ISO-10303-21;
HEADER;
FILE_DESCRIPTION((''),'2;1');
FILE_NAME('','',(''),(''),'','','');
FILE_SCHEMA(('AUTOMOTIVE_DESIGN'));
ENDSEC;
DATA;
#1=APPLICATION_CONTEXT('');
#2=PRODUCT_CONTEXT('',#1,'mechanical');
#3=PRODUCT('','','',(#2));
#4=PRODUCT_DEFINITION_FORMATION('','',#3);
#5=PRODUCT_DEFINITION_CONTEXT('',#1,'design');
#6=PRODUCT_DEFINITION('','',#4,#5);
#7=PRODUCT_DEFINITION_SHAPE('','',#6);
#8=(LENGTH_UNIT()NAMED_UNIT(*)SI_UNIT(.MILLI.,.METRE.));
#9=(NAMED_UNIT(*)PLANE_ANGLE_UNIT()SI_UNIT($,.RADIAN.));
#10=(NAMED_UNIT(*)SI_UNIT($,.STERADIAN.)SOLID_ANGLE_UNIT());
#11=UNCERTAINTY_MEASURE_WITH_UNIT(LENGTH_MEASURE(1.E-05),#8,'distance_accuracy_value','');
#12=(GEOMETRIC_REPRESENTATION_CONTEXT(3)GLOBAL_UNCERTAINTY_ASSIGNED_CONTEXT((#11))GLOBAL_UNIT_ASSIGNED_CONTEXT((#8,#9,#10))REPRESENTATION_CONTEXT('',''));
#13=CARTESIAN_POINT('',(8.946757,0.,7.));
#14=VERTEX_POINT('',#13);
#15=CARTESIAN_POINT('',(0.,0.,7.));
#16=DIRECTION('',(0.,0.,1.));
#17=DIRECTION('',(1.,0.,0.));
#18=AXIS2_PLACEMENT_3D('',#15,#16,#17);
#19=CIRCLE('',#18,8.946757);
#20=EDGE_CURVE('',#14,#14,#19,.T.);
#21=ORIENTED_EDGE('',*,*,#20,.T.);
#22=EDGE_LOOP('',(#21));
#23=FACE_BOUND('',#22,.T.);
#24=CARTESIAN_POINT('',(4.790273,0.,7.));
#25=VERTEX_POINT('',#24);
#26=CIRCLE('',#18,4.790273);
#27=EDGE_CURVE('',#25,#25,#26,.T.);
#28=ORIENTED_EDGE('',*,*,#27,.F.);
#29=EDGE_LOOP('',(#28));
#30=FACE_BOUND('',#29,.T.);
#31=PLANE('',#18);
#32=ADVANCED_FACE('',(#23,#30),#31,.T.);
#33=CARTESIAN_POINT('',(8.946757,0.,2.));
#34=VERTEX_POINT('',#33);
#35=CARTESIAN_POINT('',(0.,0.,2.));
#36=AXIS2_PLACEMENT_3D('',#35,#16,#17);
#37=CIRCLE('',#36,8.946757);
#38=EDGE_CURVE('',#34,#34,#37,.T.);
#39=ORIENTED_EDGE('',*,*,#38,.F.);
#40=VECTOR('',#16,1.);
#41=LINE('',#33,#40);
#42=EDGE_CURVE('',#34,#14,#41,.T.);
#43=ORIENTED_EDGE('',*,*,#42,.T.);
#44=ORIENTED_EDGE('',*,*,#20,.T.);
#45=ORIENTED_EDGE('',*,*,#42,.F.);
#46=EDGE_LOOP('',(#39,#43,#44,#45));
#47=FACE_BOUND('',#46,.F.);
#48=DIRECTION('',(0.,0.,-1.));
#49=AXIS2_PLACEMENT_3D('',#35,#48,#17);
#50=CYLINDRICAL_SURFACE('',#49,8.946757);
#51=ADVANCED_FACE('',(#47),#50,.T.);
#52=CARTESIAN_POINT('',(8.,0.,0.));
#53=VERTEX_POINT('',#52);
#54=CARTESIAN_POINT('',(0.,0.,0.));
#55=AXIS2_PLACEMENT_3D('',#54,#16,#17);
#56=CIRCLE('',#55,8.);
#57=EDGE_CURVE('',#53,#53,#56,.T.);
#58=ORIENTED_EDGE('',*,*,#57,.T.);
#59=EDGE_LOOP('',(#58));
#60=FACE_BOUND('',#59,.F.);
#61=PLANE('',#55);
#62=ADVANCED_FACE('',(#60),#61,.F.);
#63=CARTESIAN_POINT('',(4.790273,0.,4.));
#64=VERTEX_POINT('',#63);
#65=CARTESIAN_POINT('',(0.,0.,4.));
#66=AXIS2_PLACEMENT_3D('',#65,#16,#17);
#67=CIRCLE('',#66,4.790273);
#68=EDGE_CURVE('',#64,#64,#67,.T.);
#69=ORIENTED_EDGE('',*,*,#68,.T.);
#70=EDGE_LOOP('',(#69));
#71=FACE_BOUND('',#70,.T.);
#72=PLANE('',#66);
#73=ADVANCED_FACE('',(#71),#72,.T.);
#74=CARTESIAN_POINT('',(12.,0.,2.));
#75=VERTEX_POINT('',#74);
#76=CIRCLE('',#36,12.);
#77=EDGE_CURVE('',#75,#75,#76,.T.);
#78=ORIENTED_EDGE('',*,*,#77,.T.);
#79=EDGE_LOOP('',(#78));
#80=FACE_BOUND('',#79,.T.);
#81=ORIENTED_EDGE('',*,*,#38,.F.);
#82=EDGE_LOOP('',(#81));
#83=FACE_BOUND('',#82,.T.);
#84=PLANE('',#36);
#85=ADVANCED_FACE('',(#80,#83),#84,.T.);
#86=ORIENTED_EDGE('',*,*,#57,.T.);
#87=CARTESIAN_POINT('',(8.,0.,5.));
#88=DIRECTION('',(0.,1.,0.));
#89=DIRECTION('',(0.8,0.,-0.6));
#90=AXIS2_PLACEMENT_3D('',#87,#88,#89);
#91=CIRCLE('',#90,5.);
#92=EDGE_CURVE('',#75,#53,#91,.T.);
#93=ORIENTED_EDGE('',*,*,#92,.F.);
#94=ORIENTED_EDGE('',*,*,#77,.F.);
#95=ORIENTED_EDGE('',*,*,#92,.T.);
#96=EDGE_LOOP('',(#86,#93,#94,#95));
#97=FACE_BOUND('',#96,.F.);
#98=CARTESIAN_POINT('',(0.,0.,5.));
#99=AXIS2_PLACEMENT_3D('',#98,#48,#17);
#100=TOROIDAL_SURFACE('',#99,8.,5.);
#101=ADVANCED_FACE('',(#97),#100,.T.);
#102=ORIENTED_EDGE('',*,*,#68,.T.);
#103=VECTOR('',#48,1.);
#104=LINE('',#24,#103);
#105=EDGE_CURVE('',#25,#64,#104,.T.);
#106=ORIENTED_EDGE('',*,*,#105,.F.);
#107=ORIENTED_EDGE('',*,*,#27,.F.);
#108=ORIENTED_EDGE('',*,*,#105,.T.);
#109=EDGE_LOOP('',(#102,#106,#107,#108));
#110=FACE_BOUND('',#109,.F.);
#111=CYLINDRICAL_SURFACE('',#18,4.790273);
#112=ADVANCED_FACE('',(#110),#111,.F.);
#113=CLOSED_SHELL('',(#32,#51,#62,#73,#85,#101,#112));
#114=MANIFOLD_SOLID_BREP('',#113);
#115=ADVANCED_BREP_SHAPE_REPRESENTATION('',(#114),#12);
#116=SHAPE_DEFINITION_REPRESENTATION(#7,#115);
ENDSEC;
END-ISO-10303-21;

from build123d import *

# Parameters (mm, degrees)
F0_R     = 12
F1_DEPTH = 2
F2_R     = 8.9467567694
F3_DEPTH = 5
F4_R     = 4.7902731663
F5_DEPTH = 3


# Not quite as in the source:
# - a fillet or chamfer that OpenCascade refuses, or shapes differently, is made with other operations: its cross-section is extruded or revolved along the edge and cut away or added


with BuildPart() as f1:
    # F0 (on Top) → F1 (new body)
    with BuildSketch(Plane.XY):
        Circle(F0_R)
    extrude(amount=F1_DEPTH)

    # F2 (on face) → F3 (join)
    with BuildSketch(Plane.XY.offset(2)):
        Circle(F2_R)
    extrude(amount=F3_DEPTH)

    # F4 (on face) → F5 (cut)
    with BuildSketch(Plane.XY.offset(7)):
        Circle(F4_R)
    extrude(amount=-F5_DEPTH, mode=Mode.SUBTRACT)

    # F6: fillet of radius 5 on 1 edges, made by hand

    # F6_s1 → F6_t2 (revolve, cut)
    with BuildSketch(Plane.XZ):
        with BuildLine():
            ThreePointArc((12, 2), (10.2360679775, 0.527864045), (8, 0))
            Line((8, 0), (12, 0))
            Line((12, 0), (12, 2))
        make_face()
    revolve(axis=Axis((0, 0, 0), (0, 0, 1)), mode=Mode.SUBTRACT)


solid = f1.part
